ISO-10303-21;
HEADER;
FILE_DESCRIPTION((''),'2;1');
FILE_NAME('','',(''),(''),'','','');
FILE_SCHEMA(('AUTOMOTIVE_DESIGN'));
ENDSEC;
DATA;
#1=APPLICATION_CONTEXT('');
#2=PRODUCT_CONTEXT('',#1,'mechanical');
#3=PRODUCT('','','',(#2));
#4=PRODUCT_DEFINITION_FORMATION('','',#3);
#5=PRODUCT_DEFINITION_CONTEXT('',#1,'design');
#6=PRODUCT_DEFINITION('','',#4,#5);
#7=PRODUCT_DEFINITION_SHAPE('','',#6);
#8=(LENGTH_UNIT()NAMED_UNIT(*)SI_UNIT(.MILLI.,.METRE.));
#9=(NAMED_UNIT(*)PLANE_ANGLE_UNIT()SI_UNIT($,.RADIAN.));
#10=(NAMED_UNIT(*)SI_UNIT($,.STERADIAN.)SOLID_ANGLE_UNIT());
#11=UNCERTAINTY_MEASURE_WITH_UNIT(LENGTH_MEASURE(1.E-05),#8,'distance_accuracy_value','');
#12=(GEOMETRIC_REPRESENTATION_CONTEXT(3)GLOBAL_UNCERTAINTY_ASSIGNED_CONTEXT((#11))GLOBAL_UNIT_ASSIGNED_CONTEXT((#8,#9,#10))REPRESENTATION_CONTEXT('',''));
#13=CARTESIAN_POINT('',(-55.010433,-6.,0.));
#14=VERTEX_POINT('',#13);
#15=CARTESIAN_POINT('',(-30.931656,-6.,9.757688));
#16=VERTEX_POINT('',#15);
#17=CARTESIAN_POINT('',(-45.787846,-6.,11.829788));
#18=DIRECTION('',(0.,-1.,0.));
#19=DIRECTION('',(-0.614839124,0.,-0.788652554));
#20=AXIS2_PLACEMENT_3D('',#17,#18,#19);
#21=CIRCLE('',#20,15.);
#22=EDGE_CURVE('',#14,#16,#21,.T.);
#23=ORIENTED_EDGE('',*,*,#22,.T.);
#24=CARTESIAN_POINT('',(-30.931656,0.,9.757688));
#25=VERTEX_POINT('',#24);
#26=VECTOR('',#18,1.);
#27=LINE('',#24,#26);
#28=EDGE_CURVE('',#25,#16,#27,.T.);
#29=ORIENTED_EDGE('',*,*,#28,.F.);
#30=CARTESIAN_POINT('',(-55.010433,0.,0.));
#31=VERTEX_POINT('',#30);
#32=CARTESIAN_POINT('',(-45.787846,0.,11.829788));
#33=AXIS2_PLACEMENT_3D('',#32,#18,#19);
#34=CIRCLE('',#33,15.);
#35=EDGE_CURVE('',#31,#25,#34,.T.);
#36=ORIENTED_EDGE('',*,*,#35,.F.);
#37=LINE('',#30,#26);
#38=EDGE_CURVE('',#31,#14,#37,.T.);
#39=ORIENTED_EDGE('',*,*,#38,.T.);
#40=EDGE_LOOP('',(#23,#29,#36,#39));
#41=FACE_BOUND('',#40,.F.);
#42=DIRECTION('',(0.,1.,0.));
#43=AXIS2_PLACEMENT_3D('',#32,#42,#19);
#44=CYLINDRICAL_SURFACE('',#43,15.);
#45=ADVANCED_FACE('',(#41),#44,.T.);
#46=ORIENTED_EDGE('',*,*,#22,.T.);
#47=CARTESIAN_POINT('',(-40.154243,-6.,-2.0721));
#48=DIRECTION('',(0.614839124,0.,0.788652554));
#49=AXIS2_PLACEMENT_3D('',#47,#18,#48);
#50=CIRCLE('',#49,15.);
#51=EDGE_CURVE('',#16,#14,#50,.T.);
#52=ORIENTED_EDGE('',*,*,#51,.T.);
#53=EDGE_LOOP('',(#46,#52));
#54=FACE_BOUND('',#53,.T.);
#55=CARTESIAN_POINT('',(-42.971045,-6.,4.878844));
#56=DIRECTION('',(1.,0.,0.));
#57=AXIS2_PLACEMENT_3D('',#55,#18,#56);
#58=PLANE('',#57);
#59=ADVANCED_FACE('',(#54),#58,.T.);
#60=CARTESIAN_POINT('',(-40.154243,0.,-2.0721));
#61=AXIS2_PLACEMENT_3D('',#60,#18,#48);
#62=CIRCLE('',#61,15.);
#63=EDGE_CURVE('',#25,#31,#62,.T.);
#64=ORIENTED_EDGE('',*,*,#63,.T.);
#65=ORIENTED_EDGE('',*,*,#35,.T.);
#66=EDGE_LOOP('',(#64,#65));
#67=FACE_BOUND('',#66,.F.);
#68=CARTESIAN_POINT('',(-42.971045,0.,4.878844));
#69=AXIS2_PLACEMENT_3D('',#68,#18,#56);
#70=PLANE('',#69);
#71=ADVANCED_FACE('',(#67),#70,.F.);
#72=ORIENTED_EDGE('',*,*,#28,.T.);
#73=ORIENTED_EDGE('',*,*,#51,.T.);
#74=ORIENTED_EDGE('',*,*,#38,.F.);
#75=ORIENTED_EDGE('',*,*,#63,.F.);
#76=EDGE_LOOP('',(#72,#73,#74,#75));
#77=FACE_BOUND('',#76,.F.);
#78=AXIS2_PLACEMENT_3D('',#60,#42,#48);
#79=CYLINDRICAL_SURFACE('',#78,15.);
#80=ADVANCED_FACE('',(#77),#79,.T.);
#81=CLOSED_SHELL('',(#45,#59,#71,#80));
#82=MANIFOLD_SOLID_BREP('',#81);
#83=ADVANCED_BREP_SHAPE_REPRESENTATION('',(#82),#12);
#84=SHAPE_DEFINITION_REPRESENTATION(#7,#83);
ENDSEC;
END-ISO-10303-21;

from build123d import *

# Parameters (mm, degrees)
F2_DEPTH = 6


# Not quite as in the source:
# - a feature names something its author has since deleted; it is built from what else it names
# - the program builds the solid bodies; features that only make, move or delete a surface that nothing else refers to are left out


with BuildPart() as f2:
    # F0 (on Front) → F2 (new body)
    with BuildSketch(Plane.XZ):
        with BuildLine():
            ThreePointArc((-55.0104333185, 0), (-40.1542426855, -2.0721003539), (-30.9316558234, 9.7576879608))
            ThreePointArc((-30.9316558234, 9.7576879608), (-45.7878464564, 11.8297883147), (-55.0104333185, 0))
        make_face()
    extrude(amount=F2_DEPTH)


solid = f2.part
